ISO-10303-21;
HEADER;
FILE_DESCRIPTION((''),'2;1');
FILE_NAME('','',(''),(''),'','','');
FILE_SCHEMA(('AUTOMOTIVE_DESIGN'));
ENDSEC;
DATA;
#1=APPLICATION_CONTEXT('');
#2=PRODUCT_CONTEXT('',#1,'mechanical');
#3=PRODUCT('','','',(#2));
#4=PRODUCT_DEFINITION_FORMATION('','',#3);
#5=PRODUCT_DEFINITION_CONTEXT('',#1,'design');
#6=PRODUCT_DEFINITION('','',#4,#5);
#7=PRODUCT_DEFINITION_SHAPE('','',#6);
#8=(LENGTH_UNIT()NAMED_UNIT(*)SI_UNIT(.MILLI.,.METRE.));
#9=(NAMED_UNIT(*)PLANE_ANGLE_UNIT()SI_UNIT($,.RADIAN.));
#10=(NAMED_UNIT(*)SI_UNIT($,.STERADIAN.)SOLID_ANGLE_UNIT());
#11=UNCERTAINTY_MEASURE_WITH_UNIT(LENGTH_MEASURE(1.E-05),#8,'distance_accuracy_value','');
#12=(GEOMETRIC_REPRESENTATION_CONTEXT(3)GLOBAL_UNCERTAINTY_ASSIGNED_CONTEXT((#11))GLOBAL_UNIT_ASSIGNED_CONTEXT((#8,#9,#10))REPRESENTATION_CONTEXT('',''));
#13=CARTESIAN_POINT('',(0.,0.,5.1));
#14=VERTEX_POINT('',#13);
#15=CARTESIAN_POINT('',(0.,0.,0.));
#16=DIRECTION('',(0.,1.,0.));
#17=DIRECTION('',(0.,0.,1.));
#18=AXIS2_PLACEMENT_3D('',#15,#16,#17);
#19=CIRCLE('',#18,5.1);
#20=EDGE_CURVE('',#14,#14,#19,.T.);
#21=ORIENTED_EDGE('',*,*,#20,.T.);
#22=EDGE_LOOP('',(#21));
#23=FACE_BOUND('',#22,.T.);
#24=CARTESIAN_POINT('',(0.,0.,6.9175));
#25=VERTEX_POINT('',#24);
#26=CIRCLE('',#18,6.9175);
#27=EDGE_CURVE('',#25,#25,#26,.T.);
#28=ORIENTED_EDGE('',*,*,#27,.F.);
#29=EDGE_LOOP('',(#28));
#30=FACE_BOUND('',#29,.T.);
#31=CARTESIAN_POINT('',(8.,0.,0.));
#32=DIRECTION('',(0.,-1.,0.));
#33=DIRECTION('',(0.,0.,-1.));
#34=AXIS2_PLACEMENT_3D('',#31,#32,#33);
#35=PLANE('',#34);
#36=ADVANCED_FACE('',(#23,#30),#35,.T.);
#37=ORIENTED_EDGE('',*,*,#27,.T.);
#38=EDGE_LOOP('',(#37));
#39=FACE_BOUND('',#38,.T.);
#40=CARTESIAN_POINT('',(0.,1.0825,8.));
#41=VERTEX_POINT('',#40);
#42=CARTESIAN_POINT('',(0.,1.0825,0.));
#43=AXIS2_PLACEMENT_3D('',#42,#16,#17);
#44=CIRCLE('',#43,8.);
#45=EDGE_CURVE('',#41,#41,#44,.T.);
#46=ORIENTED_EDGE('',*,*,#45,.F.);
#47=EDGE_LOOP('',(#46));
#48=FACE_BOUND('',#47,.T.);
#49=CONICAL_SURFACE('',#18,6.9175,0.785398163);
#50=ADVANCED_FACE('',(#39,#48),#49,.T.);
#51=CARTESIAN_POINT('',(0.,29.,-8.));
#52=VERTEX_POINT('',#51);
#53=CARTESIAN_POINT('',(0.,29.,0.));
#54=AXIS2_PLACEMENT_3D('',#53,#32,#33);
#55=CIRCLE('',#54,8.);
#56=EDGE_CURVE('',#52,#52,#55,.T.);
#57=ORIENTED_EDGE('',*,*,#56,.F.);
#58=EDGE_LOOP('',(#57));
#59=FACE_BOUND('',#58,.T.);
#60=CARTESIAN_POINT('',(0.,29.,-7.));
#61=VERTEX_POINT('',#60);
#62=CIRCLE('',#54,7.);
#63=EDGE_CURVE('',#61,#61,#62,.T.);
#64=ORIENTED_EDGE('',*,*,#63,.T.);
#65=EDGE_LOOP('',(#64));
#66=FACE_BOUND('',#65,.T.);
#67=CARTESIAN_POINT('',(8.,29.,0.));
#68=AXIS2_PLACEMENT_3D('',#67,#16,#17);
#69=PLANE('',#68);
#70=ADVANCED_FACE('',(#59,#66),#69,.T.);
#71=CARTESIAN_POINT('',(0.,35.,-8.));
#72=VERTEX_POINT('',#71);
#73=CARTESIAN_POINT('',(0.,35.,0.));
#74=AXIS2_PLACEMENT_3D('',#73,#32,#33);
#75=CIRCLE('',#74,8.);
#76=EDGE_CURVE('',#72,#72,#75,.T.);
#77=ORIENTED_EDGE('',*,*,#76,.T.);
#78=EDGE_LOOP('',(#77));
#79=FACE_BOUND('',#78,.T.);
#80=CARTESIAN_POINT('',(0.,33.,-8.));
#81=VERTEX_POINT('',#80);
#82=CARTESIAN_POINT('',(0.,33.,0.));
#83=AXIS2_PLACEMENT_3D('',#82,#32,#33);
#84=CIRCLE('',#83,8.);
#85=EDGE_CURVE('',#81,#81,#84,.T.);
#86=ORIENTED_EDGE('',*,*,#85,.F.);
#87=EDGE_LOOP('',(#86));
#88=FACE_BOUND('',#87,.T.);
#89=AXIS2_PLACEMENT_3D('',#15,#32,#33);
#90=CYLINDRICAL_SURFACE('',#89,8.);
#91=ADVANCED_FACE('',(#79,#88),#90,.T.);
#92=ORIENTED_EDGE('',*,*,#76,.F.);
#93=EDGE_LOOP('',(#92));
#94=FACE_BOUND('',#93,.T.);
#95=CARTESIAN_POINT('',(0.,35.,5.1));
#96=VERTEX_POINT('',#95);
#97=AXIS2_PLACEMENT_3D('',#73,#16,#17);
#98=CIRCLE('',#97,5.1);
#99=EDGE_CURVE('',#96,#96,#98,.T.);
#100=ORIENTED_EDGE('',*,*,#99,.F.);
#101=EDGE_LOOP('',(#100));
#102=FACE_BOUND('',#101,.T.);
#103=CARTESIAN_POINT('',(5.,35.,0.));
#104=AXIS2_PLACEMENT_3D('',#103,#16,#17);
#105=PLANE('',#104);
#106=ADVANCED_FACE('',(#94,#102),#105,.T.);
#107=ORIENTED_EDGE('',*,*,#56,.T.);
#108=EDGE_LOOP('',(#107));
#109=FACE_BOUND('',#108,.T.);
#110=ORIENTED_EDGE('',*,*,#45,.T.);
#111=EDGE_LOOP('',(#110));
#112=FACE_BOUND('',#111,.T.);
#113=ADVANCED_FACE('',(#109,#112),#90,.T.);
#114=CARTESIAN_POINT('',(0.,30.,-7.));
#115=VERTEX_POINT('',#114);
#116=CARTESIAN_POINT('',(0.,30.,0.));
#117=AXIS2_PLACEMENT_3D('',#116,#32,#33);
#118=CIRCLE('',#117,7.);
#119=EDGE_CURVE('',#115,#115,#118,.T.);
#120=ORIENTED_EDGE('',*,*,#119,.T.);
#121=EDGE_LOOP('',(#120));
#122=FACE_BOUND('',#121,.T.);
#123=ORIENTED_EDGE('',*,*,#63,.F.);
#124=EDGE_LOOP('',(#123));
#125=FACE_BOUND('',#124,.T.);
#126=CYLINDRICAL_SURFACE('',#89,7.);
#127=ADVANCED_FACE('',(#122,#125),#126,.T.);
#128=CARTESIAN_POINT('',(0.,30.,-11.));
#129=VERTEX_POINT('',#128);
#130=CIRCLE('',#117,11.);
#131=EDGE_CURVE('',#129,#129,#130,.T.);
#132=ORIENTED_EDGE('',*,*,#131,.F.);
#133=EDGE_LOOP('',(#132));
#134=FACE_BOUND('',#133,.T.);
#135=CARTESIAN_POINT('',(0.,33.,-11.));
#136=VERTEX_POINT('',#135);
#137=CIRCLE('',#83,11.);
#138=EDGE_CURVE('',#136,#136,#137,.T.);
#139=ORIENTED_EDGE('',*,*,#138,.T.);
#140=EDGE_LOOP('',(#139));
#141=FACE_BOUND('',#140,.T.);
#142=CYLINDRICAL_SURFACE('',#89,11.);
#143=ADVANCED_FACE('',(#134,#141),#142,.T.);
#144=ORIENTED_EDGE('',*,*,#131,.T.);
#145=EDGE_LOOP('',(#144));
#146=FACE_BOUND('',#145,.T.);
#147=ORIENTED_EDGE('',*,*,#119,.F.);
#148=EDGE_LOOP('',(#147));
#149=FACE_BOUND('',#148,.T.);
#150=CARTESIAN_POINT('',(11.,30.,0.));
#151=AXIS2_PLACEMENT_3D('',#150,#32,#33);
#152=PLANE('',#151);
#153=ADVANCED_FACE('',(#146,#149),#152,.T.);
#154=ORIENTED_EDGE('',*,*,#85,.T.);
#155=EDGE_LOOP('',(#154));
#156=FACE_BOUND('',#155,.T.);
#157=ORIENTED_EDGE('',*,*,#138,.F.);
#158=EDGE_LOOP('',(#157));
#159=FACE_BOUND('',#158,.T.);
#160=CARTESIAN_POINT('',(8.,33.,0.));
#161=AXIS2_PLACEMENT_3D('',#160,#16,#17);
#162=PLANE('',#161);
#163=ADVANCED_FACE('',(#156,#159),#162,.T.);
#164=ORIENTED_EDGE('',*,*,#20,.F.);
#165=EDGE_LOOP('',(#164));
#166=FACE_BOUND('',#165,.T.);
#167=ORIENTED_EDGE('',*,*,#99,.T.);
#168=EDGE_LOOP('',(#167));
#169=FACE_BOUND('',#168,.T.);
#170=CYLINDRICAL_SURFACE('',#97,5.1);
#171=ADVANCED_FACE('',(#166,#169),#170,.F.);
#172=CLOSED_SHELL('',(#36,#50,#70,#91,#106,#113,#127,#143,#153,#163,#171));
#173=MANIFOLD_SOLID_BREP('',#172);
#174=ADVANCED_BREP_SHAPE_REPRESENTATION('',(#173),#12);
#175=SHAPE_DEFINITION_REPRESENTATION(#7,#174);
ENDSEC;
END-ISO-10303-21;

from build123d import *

# Parameters (mm, degrees)
HOLE_WIZARD_M12_1_D = 10.2


# Read off the part's stored shape, not the designer's step: M16 机械螺纹 螺柱1
with BuildPart() as part:
    # 草图1 → 旋转1 (revolve)
    with BuildSketch(Plane.XY, mode=Mode.PRIVATE) as revolve_1_sk:
        Polygon((5, 0), (5, 35), (8, 35), (8, 33), (11, 33), (11, 30), (7, 30), (7, 29), (8, 29), (8, 0), align=None)
    revolve(revolve_1_sk.sketch.rotate(Axis((0, 0, 0), (0, 1, 0)), 90), axis=Axis((0, 0, 0), (0, 1, 0)))

    # M16 机械螺纹 螺柱1 outline → M16 机械螺纹 螺柱1 (revolve, cut)
    with BuildSketch(Plane.XY):
        Polygon((8, 1.0825), (6.9175, 0), (8, 0), align=None)
    revolve(axis=Axis((0, 0, 0), (0, 1, 0)), mode=Mode.SUBTRACT)

    # M12 螺纹孔1 (through all)
    with Locations(Plane(origin=(0, 35, 0), x_dir=(1, 0, 0), z_dir=(0, 1, 0))):
        with Locations((0, 0)):
            Hole(HOLE_WIZARD_M12_1_D / 2)


solid = part.part
